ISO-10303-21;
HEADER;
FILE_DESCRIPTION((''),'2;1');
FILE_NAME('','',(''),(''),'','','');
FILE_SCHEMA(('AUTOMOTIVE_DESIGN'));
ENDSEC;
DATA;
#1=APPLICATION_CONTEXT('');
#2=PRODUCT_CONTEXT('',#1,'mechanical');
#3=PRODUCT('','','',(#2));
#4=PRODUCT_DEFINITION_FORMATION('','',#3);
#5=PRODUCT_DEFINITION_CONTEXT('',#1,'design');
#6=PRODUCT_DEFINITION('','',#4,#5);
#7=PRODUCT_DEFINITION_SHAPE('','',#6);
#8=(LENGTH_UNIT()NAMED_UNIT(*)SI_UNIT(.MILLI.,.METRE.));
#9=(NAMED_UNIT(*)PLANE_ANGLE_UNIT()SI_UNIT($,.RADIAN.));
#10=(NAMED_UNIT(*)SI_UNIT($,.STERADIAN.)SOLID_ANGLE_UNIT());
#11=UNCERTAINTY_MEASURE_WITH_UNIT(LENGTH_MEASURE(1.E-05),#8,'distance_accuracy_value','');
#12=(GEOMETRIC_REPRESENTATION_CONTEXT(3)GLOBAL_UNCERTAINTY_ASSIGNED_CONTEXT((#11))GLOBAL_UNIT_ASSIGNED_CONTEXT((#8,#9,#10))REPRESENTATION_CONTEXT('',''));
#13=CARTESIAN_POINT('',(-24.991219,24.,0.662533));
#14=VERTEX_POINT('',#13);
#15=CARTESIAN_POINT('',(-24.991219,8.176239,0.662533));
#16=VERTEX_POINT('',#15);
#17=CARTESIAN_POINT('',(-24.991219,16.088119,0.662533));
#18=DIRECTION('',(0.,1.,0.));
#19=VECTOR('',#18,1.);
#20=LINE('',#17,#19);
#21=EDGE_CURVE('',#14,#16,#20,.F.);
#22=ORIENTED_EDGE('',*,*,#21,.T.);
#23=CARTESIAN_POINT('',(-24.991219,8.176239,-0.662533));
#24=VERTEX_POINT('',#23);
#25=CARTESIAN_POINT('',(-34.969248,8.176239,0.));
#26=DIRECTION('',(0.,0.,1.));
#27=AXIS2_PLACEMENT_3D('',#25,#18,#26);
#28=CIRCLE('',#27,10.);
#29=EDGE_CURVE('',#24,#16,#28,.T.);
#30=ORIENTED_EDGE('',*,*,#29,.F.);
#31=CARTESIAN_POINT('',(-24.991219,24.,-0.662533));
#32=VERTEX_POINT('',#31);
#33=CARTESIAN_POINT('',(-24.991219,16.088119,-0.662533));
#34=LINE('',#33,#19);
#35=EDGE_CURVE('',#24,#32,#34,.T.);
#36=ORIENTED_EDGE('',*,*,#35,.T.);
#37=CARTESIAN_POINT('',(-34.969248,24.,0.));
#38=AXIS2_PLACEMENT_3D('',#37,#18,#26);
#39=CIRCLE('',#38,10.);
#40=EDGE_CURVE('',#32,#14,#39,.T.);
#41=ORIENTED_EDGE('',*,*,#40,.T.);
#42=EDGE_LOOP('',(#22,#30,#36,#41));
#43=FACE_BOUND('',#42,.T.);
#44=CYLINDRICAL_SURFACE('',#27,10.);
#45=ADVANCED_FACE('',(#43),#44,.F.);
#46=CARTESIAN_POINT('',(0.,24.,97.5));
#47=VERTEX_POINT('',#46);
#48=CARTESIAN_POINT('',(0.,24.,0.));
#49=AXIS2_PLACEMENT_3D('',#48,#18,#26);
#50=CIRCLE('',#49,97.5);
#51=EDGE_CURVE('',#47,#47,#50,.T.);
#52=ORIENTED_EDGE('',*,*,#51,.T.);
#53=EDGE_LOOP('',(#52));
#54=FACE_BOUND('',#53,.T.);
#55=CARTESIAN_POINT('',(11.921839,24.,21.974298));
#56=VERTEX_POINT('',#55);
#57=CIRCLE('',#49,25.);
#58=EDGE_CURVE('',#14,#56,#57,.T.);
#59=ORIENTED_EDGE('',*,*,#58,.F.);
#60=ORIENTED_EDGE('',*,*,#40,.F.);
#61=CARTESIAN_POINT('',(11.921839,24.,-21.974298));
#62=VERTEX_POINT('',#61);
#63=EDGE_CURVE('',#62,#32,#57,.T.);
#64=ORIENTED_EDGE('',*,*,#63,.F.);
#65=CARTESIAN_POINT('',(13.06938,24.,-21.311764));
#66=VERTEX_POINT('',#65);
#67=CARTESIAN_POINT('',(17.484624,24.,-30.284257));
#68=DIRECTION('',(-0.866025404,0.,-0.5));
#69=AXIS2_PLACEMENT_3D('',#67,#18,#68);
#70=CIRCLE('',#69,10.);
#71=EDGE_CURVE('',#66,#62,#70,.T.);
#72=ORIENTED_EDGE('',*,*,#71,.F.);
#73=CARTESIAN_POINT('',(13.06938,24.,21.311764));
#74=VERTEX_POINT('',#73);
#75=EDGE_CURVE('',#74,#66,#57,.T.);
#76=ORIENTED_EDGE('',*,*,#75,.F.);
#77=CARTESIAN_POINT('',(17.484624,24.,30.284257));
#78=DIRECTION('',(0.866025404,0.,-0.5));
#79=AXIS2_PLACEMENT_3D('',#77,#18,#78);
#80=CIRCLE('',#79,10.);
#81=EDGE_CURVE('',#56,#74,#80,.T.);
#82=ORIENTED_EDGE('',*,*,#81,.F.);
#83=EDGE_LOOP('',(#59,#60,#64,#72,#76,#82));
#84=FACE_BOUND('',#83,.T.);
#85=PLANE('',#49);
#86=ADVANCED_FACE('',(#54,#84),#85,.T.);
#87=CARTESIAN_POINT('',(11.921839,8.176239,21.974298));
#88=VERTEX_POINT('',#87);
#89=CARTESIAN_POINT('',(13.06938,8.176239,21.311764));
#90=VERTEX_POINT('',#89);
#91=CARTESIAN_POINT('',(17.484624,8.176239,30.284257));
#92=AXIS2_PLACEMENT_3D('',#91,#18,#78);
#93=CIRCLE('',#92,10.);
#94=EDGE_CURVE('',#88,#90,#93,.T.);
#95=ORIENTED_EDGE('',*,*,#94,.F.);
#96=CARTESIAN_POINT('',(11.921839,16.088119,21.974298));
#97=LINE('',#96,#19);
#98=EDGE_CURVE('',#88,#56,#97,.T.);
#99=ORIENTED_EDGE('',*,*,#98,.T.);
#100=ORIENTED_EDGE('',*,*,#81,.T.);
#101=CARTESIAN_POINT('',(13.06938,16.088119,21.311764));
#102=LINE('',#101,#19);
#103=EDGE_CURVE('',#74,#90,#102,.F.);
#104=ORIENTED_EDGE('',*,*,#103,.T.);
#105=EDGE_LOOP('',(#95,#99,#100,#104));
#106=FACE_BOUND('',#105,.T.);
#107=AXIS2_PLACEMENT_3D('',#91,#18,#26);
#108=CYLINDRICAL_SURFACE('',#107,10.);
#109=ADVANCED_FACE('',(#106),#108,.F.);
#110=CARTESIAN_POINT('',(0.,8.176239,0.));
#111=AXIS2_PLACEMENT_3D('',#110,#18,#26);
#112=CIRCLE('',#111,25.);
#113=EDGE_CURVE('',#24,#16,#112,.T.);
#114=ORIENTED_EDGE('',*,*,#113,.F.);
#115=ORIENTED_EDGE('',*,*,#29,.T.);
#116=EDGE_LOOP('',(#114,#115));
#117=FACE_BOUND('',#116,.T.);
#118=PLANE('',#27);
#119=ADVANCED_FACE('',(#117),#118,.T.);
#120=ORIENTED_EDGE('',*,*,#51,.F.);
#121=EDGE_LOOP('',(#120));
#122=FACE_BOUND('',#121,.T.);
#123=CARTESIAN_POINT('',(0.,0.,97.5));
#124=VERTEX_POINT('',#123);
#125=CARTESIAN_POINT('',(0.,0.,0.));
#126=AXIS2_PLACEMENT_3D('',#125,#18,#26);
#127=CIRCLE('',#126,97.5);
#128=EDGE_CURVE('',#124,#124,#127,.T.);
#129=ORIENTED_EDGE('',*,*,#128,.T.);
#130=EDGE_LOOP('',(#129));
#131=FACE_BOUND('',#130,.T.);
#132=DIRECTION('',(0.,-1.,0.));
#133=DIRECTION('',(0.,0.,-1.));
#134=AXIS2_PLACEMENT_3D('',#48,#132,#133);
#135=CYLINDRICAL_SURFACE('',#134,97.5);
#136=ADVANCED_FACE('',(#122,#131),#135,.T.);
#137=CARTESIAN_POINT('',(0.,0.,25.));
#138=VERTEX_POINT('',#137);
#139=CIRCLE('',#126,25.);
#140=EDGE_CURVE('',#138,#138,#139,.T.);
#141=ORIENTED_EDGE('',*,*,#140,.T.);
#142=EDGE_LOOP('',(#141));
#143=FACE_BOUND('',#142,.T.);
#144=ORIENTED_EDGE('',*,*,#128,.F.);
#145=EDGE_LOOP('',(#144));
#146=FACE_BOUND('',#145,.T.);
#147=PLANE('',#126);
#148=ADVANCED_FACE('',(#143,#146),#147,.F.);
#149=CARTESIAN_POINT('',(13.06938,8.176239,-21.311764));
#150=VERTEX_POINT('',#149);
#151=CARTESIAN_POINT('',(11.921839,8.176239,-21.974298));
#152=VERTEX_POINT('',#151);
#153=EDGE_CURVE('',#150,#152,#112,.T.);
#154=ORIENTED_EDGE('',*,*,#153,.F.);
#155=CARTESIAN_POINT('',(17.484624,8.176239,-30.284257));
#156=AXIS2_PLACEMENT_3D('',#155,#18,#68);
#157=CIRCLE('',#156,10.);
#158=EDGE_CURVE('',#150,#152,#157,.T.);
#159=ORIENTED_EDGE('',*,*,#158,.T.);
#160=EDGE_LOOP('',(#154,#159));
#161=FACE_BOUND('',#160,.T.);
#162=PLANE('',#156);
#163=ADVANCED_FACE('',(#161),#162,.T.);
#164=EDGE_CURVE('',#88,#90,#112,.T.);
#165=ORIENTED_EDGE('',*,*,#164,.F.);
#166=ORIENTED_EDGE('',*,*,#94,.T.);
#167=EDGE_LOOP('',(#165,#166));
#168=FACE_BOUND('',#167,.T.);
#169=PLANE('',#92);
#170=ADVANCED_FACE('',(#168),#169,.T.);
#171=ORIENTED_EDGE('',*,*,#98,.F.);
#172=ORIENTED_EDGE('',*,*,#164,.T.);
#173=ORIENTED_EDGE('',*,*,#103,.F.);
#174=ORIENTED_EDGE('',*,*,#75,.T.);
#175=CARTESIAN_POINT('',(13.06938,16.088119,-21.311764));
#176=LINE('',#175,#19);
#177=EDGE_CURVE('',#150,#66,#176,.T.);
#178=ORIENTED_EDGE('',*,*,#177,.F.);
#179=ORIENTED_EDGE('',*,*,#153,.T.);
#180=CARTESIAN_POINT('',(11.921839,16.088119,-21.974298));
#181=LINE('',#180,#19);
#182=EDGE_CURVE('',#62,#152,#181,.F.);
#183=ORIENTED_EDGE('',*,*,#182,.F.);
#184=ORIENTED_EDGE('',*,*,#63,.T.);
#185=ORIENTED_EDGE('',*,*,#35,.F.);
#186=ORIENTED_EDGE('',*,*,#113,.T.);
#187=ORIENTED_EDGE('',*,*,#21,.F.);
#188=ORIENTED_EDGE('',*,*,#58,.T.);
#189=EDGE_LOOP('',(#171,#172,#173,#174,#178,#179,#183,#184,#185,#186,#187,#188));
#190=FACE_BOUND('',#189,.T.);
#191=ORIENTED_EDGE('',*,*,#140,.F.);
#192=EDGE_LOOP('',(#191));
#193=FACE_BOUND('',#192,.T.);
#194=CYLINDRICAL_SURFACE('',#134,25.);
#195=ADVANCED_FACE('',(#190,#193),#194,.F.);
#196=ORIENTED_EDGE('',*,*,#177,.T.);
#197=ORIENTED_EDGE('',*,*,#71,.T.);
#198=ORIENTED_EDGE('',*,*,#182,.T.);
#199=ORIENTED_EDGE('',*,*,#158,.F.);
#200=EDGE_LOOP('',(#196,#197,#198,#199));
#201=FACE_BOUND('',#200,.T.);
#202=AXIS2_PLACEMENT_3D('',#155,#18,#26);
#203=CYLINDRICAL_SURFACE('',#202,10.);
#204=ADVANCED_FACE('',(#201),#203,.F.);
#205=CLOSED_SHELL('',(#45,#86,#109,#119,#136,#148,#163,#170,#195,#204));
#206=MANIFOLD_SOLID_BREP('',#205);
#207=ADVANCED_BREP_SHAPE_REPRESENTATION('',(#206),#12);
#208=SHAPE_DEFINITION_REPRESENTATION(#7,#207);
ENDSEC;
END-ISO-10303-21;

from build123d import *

# Parameters (mm, degrees)
SKETCH1_R           = 97.5
BOSS_EXTRUDE1_DEPTH = 24
SKETCH2_R           = 25
CUT_EXTRUDE1_DEPTH  = 140.958922545
SKETCH3_R           = 10
CUT_EXTRUDE2_DEPTH  = 15.823761425
CIRPATTERN1_COUNT   = 3


with BuildPart() as part:
    # Sketch1 → Boss-Extrude1 (new body)
    with BuildSketch(Plane(origin=(0, 0, 0), x_dir=(1, 0, 0), z_dir=(0, 1, 0))):
        Circle(SKETCH1_R)
    extrude(amount=BOSS_EXTRUDE1_DEPTH)

    # Sketch2 → Cut-Extrude1 (cut, through all)
    with BuildSketch(Plane(origin=(0, 0, 0), x_dir=(1, 0, 0), z_dir=(0, 1, 0))):
        Circle(SKETCH2_R)
    extrude(amount=CUT_EXTRUDE1_DEPTH, mode=Mode.SUBTRACT)

    # Sketch3 → Cut-Extrude2 (cut)
    with BuildSketch(Plane(origin=(0, 24, 0), x_dir=(1, 0, 0), z_dir=(0, 1, 0))):
        with Locations((-34.969247783, 0)):
            Circle(SKETCH3_R)
    cut_extrude2 = extrude(amount=-CUT_EXTRUDE2_DEPTH, mode=Mode.SUBTRACT)

    # CirPattern1: Cut-Extrude2 ×3 about axis
    cirpattern1_axis = Axis((0, 0, 0), (0, 1, 0))
    for i in range(1, CIRPATTERN1_COUNT):
        add(cut_extrude2.rotate(cirpattern1_axis, i * 360 / CIRPATTERN1_COUNT), mode=Mode.SUBTRACT)


solid = part.part
